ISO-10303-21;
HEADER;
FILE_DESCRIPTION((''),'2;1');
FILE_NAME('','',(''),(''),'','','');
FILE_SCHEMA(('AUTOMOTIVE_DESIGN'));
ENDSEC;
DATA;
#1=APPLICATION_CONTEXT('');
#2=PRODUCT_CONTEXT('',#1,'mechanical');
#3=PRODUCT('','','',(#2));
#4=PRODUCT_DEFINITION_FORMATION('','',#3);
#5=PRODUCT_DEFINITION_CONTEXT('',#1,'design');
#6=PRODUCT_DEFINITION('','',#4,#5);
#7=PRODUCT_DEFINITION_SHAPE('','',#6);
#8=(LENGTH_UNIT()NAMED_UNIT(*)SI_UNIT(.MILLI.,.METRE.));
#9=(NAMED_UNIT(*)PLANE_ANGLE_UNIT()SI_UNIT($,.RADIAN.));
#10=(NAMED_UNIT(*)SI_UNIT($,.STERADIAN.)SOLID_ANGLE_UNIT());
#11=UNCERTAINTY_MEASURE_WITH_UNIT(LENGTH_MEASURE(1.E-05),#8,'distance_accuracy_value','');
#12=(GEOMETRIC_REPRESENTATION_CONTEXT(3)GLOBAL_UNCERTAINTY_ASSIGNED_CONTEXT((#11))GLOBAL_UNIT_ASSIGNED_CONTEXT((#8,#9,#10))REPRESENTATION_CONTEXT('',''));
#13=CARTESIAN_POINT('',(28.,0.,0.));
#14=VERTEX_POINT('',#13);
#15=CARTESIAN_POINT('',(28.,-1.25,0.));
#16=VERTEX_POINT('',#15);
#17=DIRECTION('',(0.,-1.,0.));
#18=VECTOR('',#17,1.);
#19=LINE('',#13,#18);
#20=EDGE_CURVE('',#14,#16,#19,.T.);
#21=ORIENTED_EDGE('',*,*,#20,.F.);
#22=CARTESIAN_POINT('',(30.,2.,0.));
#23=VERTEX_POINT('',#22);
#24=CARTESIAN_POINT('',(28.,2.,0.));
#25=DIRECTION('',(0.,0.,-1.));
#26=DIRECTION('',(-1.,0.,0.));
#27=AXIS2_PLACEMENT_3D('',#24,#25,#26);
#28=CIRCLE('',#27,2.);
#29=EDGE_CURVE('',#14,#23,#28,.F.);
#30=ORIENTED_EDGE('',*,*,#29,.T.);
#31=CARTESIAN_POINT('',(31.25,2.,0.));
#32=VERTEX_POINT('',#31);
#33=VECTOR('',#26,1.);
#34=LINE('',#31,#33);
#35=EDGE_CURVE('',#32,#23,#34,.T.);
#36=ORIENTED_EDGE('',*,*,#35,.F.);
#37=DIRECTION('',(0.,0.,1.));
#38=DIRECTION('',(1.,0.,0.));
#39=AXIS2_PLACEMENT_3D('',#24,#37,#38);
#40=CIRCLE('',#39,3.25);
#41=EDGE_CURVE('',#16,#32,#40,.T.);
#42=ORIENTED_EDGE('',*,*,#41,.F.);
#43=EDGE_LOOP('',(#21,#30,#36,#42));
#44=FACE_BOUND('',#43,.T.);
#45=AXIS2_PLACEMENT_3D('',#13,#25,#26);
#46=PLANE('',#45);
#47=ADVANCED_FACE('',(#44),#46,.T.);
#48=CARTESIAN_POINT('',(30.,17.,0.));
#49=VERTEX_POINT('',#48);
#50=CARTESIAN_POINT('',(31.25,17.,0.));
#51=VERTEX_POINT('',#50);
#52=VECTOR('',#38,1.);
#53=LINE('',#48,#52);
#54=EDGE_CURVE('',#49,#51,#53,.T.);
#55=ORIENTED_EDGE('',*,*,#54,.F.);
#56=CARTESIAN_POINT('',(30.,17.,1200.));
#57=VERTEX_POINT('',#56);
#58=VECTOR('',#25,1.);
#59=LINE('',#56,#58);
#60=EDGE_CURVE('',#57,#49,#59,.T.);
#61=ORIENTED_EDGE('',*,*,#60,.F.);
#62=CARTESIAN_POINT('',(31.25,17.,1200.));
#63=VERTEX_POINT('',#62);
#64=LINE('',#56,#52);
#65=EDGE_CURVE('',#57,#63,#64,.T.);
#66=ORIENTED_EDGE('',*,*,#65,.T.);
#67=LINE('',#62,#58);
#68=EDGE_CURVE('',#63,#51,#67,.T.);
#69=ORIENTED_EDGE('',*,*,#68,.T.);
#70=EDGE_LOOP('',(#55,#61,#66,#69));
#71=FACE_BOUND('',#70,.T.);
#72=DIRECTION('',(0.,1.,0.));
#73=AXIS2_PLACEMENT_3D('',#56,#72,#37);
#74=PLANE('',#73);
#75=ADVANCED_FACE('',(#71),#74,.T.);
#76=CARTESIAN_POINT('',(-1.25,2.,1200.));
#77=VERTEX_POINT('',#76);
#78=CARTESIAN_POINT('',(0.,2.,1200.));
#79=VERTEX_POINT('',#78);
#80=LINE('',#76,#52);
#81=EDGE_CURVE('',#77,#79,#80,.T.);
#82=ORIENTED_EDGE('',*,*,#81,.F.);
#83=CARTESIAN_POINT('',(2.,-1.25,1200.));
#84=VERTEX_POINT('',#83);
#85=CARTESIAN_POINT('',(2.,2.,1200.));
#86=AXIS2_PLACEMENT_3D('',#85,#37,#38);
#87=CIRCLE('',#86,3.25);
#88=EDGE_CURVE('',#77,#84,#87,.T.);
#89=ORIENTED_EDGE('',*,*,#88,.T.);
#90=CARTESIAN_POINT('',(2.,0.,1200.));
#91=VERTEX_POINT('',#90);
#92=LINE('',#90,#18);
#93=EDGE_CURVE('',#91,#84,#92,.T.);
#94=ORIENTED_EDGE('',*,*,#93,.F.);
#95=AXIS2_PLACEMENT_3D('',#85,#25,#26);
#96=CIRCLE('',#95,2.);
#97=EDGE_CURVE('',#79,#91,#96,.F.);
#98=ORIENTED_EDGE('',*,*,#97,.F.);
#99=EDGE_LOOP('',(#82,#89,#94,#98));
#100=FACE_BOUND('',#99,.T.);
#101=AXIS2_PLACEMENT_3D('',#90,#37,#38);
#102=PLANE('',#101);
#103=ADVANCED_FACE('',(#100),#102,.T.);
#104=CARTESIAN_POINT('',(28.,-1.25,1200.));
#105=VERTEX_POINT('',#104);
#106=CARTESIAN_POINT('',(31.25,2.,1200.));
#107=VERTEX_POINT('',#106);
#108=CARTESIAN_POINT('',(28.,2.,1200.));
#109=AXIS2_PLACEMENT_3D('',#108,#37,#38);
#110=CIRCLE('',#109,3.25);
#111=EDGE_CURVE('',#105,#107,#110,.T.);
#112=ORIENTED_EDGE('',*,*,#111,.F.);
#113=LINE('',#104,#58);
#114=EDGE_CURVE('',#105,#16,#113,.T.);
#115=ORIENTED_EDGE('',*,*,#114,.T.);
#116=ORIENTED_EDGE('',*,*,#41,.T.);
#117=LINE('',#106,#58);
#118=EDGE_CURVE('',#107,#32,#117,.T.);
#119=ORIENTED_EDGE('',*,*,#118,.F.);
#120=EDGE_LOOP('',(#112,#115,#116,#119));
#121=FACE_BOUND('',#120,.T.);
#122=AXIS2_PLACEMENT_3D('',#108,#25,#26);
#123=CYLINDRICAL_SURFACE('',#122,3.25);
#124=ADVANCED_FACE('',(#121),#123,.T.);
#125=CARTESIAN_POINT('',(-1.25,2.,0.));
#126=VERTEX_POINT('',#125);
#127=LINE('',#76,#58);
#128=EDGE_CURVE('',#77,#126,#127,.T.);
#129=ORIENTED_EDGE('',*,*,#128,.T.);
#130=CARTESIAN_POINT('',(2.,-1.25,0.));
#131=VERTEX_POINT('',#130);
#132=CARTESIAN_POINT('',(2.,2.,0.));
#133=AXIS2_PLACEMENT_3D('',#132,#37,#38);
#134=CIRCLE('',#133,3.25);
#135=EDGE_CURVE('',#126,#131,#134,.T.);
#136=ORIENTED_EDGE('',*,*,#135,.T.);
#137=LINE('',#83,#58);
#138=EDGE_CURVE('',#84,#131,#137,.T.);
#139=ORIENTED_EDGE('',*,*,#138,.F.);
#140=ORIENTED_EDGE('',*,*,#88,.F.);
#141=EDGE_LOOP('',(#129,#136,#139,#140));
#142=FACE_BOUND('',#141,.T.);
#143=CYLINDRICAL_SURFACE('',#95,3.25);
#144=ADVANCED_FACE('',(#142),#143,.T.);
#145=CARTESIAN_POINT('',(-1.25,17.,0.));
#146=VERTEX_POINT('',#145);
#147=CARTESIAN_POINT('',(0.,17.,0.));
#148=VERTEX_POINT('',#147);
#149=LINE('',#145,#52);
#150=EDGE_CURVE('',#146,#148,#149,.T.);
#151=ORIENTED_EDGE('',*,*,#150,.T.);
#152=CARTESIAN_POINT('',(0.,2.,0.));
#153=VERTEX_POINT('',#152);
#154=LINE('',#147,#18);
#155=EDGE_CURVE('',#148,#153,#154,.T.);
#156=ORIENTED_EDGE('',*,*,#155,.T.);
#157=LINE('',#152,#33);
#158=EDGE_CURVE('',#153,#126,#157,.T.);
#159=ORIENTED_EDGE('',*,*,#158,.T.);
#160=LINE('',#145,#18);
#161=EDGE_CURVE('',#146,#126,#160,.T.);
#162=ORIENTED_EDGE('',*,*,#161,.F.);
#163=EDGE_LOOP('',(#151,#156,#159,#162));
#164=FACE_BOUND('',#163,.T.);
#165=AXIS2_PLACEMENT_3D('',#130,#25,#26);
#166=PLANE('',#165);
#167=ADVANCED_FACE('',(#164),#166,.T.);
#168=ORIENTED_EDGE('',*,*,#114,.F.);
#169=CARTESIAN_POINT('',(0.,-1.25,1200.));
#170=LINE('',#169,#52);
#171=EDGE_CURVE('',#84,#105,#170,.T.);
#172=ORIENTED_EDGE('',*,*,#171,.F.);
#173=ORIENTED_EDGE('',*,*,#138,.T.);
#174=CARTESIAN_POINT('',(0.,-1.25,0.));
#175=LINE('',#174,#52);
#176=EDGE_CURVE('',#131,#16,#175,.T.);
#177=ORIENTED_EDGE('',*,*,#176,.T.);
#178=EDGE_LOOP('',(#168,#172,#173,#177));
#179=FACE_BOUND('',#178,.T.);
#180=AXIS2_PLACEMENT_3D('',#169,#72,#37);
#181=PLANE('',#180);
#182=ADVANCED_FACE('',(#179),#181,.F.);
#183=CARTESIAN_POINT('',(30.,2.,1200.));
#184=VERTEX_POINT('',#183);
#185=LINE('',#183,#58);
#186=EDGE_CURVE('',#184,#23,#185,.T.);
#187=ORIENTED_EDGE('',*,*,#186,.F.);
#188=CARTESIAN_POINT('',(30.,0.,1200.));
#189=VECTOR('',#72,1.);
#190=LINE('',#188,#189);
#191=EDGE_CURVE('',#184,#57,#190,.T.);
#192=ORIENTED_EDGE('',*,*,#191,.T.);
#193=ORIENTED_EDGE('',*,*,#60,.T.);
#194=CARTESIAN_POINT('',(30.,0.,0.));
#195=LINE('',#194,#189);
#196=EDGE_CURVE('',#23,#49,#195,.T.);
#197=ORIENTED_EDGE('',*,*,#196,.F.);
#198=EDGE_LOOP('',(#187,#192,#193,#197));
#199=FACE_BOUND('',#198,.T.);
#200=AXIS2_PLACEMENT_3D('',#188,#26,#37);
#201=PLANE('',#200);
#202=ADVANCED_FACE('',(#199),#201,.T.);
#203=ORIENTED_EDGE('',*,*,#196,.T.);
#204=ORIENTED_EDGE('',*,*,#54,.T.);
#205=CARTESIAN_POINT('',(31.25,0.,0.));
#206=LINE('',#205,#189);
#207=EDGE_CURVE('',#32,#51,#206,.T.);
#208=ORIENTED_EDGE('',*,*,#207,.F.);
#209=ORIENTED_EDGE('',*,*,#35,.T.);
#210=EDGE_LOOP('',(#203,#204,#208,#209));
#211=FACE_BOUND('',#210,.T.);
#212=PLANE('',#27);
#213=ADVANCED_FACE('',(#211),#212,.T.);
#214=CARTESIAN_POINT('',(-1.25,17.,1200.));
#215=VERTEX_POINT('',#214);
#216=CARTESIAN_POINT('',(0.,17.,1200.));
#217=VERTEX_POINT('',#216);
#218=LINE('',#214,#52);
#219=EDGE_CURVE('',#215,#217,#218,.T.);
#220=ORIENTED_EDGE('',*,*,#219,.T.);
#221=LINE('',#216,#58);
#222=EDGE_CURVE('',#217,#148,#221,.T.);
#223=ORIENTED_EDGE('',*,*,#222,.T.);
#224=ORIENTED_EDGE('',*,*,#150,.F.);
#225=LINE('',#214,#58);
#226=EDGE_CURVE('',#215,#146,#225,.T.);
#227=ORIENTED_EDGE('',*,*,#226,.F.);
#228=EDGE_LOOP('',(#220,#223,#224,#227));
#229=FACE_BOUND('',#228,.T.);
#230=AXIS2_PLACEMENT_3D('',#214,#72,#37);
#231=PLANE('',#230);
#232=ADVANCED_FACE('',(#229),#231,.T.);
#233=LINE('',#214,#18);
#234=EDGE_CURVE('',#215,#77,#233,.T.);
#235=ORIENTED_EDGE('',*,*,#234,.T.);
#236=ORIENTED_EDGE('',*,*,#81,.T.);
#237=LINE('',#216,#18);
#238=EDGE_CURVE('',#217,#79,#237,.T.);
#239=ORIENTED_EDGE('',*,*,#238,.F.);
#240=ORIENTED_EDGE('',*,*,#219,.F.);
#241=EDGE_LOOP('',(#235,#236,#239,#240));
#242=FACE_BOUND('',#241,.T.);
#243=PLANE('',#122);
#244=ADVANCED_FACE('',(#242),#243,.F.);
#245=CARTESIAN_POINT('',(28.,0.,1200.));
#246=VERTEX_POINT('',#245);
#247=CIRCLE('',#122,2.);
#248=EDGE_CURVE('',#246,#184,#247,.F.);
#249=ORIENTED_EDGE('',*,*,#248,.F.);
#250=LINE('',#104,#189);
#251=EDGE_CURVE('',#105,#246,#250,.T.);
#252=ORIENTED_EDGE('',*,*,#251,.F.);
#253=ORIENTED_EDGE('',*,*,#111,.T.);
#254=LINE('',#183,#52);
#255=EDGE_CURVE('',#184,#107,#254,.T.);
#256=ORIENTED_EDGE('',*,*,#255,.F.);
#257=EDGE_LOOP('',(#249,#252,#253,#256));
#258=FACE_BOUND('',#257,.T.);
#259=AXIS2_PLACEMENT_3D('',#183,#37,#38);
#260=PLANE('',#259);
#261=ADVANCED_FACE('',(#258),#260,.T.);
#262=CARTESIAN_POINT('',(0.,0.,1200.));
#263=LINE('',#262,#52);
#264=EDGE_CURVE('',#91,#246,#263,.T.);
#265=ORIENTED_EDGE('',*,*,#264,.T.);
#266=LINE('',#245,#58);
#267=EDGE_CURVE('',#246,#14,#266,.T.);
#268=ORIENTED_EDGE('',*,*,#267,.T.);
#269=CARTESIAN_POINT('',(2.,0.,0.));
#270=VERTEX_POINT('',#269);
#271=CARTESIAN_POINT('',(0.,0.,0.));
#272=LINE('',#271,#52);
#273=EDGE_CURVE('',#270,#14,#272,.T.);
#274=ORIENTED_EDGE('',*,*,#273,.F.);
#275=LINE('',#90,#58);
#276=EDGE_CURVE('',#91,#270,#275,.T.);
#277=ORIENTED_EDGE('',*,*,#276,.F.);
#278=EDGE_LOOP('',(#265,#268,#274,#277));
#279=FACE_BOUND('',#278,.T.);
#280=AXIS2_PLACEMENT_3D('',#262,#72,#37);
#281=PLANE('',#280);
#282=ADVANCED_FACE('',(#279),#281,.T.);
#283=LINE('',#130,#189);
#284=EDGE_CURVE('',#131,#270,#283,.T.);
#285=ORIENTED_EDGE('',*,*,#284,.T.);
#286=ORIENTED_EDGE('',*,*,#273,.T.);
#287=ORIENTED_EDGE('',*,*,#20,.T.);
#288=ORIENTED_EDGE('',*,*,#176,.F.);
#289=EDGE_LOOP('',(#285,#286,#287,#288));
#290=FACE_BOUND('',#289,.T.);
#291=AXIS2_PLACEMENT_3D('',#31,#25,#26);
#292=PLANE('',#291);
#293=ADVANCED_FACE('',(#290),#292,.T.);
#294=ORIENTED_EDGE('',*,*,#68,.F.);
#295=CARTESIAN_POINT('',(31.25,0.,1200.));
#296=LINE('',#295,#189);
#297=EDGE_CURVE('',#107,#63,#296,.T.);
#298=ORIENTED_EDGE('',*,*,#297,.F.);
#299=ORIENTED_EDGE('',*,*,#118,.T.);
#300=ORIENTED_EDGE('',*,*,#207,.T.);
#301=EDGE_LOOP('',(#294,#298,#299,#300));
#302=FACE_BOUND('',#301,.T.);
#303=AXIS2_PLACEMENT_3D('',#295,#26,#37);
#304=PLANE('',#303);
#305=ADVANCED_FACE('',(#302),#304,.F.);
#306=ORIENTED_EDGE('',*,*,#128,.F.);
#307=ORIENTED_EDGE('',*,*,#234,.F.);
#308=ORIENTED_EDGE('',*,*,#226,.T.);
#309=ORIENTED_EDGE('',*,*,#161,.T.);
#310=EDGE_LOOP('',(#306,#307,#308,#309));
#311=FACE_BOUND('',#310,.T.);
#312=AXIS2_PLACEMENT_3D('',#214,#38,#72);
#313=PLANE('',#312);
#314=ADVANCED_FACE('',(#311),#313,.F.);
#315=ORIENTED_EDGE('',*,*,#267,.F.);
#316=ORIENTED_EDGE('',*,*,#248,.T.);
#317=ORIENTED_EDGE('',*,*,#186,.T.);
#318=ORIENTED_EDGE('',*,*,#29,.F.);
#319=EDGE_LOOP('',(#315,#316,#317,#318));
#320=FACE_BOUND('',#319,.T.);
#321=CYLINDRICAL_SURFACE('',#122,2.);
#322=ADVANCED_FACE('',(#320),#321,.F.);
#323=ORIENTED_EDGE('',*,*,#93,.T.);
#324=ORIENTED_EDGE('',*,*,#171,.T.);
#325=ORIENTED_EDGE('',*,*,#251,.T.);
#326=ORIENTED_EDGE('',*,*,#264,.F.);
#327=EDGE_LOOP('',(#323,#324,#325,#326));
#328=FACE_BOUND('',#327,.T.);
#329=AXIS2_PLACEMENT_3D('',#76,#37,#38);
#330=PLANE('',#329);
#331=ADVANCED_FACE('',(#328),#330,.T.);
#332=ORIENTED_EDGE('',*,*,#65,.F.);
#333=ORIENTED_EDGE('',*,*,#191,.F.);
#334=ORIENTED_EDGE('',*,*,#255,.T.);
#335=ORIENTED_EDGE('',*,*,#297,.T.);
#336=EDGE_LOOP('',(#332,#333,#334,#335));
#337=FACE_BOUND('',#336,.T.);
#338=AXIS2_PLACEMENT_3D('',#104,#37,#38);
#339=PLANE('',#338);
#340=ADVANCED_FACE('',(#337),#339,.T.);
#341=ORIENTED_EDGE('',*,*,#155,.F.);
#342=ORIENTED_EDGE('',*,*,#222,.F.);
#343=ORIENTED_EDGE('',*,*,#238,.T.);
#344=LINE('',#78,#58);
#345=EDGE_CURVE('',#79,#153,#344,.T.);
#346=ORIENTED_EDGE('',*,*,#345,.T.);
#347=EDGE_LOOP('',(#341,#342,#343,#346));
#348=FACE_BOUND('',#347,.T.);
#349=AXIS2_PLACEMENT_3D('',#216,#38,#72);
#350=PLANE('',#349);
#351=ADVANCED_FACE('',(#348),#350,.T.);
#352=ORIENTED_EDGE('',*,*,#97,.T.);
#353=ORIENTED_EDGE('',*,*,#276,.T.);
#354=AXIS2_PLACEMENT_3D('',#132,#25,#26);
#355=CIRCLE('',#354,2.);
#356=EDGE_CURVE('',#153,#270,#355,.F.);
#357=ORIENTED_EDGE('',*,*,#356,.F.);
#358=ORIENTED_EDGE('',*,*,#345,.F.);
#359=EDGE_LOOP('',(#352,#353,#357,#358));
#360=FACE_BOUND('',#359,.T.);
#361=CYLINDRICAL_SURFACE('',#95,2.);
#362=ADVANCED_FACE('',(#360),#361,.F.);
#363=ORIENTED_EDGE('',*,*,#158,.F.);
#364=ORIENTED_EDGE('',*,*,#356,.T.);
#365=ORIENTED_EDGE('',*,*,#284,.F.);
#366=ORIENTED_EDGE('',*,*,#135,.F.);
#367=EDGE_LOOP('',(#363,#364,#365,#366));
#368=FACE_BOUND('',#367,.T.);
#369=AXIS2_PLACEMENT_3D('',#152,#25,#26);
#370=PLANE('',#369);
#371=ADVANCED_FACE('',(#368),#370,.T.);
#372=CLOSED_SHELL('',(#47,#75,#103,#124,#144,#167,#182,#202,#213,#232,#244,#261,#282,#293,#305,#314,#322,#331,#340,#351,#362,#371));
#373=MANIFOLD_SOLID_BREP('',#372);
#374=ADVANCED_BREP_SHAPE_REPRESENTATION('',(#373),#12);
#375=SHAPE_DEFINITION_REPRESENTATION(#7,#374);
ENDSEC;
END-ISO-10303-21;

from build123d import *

# Parameters (mm, degrees)
BASE_FLANGE1_DEPTH = 1200


# Sheet-metal steps are written as plain solids
with BuildPart() as part:
    # Sketch1 → Base-Flange1 (new body)
    with BuildSketch(Plane.XY):
        with BuildLine():
            Line((0, 17), (0, 2))
            ThreePointArc((0, 2), (0.585786438, 0.585786438), (2, 0))
            Line((2, 0), (28, 0))
            ThreePointArc((28, 0), (29.414213562, 0.585786438), (30, 2))
            Line((30, 2), (30, 17))
            Line((30, 17), (31.25, 17))
            Line((31.25, 17), (31.25, 2))
            ThreePointArc((31.25, 2), (30.298097039, -0.298097039), (28, -1.25))
            Line((28, -1.25), (2, -1.25))
            ThreePointArc((2, -1.25), (-0.298097039, -0.298097039), (-1.25, 2))
            Line((-1.25, 2), (-1.25, 17))
            Line((-1.25, 17), (0, 17))
        make_face()
    extrude(amount=BASE_FLANGE1_DEPTH)


solid = part.part
